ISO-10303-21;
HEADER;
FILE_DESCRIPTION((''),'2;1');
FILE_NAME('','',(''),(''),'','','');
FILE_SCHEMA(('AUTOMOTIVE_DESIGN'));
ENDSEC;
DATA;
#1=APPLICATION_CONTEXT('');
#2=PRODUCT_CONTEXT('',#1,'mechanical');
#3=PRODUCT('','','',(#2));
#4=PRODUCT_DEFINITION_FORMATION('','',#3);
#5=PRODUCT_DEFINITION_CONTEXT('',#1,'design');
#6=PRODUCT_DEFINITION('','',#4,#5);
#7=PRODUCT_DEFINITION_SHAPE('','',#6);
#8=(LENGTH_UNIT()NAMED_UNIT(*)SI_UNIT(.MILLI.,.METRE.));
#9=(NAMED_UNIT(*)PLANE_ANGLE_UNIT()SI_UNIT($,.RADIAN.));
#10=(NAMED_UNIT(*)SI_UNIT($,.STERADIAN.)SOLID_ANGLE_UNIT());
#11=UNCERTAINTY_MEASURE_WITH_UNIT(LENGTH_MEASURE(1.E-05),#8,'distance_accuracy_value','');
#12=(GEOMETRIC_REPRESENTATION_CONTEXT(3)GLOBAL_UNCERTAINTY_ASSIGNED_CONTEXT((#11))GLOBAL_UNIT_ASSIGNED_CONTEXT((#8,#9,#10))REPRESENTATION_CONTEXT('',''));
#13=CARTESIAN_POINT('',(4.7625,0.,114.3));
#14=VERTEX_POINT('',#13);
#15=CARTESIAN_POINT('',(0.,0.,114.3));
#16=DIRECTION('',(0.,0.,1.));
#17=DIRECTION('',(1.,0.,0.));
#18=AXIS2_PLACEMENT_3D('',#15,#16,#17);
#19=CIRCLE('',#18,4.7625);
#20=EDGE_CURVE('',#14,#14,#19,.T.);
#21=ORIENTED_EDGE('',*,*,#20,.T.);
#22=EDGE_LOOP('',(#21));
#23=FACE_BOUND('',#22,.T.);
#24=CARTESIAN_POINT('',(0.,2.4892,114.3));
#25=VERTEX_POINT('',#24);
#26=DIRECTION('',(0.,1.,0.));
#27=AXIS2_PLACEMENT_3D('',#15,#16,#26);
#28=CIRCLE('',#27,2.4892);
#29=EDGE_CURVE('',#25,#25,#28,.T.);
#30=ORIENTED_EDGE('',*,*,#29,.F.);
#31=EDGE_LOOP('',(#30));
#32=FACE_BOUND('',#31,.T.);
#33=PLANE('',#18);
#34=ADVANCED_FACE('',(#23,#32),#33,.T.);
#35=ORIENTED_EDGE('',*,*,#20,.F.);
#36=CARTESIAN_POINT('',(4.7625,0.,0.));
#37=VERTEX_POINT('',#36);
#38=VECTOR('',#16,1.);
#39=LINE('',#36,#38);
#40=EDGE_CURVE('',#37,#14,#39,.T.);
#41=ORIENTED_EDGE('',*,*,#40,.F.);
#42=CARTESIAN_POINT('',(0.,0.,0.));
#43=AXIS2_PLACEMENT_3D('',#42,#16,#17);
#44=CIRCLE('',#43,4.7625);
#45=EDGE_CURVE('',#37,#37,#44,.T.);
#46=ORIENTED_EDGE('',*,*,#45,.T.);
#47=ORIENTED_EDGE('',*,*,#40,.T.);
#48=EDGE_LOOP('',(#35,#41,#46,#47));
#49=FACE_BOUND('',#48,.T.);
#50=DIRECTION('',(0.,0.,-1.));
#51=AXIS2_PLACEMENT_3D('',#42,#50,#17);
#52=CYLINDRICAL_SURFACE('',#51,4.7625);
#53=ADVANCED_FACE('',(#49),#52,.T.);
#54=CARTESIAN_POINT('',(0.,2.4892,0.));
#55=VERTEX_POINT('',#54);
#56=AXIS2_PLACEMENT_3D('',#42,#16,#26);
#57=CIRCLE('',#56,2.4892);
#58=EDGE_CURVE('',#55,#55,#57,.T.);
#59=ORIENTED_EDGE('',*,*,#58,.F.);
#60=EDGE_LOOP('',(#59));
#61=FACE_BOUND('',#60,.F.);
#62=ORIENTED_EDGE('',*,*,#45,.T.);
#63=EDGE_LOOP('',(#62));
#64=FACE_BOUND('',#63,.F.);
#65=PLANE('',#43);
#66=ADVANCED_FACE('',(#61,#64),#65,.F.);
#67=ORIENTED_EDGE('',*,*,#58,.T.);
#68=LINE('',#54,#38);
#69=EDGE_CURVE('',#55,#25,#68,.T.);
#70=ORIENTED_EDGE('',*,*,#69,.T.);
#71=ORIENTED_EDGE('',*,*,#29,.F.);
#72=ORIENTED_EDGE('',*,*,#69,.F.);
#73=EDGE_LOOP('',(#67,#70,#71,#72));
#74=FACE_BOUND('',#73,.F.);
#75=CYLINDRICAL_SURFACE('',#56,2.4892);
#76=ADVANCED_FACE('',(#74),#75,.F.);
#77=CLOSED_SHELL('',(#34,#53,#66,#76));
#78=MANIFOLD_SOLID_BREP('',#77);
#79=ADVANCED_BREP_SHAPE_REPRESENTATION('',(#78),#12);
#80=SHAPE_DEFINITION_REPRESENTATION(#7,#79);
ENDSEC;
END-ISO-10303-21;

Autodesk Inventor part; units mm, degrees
ref_plane "YZ Plane" through (0, 0, 0) normal (1, 0, 0) x (0, 1, 0)
ref_plane "XZ Plane" through (0, 0, 0) normal (0, 1, 0) x (-1, 0, 0)
ref_plane "XY Plane" through (0, 0, 0) normal (0, 0, 1) x (1, 0, 0)
sketch "Sketch1" plane through (0, 0, 0) normal (0, 0, 1) x (1, 0, 0)
  circle A0 centre (0, 0) radius 4.7625
  dimension "d10" = 9.525
extrude "Extrusion1" add sketch "Sketch1" along normal blind 114.3
hole "Hole1" at (0, 0, 0) direction (0, 0, 1) diameter 4.9784 end through all thread size "1/4-20 UNC" class "2B" standard "ANSI Unified Screw Threads"
equation "\"d10\" = OutsideDiameter"
equation "\"d1\" = StandoffLength"
equation "\"StandoffLength\" = 114.3"
equation "\"HoleDiameter\" = 5.1054"
equation "\"OutsideDiameter\" = 9.525"
properties part number "GP3-003" material "Aluminum 6061"
